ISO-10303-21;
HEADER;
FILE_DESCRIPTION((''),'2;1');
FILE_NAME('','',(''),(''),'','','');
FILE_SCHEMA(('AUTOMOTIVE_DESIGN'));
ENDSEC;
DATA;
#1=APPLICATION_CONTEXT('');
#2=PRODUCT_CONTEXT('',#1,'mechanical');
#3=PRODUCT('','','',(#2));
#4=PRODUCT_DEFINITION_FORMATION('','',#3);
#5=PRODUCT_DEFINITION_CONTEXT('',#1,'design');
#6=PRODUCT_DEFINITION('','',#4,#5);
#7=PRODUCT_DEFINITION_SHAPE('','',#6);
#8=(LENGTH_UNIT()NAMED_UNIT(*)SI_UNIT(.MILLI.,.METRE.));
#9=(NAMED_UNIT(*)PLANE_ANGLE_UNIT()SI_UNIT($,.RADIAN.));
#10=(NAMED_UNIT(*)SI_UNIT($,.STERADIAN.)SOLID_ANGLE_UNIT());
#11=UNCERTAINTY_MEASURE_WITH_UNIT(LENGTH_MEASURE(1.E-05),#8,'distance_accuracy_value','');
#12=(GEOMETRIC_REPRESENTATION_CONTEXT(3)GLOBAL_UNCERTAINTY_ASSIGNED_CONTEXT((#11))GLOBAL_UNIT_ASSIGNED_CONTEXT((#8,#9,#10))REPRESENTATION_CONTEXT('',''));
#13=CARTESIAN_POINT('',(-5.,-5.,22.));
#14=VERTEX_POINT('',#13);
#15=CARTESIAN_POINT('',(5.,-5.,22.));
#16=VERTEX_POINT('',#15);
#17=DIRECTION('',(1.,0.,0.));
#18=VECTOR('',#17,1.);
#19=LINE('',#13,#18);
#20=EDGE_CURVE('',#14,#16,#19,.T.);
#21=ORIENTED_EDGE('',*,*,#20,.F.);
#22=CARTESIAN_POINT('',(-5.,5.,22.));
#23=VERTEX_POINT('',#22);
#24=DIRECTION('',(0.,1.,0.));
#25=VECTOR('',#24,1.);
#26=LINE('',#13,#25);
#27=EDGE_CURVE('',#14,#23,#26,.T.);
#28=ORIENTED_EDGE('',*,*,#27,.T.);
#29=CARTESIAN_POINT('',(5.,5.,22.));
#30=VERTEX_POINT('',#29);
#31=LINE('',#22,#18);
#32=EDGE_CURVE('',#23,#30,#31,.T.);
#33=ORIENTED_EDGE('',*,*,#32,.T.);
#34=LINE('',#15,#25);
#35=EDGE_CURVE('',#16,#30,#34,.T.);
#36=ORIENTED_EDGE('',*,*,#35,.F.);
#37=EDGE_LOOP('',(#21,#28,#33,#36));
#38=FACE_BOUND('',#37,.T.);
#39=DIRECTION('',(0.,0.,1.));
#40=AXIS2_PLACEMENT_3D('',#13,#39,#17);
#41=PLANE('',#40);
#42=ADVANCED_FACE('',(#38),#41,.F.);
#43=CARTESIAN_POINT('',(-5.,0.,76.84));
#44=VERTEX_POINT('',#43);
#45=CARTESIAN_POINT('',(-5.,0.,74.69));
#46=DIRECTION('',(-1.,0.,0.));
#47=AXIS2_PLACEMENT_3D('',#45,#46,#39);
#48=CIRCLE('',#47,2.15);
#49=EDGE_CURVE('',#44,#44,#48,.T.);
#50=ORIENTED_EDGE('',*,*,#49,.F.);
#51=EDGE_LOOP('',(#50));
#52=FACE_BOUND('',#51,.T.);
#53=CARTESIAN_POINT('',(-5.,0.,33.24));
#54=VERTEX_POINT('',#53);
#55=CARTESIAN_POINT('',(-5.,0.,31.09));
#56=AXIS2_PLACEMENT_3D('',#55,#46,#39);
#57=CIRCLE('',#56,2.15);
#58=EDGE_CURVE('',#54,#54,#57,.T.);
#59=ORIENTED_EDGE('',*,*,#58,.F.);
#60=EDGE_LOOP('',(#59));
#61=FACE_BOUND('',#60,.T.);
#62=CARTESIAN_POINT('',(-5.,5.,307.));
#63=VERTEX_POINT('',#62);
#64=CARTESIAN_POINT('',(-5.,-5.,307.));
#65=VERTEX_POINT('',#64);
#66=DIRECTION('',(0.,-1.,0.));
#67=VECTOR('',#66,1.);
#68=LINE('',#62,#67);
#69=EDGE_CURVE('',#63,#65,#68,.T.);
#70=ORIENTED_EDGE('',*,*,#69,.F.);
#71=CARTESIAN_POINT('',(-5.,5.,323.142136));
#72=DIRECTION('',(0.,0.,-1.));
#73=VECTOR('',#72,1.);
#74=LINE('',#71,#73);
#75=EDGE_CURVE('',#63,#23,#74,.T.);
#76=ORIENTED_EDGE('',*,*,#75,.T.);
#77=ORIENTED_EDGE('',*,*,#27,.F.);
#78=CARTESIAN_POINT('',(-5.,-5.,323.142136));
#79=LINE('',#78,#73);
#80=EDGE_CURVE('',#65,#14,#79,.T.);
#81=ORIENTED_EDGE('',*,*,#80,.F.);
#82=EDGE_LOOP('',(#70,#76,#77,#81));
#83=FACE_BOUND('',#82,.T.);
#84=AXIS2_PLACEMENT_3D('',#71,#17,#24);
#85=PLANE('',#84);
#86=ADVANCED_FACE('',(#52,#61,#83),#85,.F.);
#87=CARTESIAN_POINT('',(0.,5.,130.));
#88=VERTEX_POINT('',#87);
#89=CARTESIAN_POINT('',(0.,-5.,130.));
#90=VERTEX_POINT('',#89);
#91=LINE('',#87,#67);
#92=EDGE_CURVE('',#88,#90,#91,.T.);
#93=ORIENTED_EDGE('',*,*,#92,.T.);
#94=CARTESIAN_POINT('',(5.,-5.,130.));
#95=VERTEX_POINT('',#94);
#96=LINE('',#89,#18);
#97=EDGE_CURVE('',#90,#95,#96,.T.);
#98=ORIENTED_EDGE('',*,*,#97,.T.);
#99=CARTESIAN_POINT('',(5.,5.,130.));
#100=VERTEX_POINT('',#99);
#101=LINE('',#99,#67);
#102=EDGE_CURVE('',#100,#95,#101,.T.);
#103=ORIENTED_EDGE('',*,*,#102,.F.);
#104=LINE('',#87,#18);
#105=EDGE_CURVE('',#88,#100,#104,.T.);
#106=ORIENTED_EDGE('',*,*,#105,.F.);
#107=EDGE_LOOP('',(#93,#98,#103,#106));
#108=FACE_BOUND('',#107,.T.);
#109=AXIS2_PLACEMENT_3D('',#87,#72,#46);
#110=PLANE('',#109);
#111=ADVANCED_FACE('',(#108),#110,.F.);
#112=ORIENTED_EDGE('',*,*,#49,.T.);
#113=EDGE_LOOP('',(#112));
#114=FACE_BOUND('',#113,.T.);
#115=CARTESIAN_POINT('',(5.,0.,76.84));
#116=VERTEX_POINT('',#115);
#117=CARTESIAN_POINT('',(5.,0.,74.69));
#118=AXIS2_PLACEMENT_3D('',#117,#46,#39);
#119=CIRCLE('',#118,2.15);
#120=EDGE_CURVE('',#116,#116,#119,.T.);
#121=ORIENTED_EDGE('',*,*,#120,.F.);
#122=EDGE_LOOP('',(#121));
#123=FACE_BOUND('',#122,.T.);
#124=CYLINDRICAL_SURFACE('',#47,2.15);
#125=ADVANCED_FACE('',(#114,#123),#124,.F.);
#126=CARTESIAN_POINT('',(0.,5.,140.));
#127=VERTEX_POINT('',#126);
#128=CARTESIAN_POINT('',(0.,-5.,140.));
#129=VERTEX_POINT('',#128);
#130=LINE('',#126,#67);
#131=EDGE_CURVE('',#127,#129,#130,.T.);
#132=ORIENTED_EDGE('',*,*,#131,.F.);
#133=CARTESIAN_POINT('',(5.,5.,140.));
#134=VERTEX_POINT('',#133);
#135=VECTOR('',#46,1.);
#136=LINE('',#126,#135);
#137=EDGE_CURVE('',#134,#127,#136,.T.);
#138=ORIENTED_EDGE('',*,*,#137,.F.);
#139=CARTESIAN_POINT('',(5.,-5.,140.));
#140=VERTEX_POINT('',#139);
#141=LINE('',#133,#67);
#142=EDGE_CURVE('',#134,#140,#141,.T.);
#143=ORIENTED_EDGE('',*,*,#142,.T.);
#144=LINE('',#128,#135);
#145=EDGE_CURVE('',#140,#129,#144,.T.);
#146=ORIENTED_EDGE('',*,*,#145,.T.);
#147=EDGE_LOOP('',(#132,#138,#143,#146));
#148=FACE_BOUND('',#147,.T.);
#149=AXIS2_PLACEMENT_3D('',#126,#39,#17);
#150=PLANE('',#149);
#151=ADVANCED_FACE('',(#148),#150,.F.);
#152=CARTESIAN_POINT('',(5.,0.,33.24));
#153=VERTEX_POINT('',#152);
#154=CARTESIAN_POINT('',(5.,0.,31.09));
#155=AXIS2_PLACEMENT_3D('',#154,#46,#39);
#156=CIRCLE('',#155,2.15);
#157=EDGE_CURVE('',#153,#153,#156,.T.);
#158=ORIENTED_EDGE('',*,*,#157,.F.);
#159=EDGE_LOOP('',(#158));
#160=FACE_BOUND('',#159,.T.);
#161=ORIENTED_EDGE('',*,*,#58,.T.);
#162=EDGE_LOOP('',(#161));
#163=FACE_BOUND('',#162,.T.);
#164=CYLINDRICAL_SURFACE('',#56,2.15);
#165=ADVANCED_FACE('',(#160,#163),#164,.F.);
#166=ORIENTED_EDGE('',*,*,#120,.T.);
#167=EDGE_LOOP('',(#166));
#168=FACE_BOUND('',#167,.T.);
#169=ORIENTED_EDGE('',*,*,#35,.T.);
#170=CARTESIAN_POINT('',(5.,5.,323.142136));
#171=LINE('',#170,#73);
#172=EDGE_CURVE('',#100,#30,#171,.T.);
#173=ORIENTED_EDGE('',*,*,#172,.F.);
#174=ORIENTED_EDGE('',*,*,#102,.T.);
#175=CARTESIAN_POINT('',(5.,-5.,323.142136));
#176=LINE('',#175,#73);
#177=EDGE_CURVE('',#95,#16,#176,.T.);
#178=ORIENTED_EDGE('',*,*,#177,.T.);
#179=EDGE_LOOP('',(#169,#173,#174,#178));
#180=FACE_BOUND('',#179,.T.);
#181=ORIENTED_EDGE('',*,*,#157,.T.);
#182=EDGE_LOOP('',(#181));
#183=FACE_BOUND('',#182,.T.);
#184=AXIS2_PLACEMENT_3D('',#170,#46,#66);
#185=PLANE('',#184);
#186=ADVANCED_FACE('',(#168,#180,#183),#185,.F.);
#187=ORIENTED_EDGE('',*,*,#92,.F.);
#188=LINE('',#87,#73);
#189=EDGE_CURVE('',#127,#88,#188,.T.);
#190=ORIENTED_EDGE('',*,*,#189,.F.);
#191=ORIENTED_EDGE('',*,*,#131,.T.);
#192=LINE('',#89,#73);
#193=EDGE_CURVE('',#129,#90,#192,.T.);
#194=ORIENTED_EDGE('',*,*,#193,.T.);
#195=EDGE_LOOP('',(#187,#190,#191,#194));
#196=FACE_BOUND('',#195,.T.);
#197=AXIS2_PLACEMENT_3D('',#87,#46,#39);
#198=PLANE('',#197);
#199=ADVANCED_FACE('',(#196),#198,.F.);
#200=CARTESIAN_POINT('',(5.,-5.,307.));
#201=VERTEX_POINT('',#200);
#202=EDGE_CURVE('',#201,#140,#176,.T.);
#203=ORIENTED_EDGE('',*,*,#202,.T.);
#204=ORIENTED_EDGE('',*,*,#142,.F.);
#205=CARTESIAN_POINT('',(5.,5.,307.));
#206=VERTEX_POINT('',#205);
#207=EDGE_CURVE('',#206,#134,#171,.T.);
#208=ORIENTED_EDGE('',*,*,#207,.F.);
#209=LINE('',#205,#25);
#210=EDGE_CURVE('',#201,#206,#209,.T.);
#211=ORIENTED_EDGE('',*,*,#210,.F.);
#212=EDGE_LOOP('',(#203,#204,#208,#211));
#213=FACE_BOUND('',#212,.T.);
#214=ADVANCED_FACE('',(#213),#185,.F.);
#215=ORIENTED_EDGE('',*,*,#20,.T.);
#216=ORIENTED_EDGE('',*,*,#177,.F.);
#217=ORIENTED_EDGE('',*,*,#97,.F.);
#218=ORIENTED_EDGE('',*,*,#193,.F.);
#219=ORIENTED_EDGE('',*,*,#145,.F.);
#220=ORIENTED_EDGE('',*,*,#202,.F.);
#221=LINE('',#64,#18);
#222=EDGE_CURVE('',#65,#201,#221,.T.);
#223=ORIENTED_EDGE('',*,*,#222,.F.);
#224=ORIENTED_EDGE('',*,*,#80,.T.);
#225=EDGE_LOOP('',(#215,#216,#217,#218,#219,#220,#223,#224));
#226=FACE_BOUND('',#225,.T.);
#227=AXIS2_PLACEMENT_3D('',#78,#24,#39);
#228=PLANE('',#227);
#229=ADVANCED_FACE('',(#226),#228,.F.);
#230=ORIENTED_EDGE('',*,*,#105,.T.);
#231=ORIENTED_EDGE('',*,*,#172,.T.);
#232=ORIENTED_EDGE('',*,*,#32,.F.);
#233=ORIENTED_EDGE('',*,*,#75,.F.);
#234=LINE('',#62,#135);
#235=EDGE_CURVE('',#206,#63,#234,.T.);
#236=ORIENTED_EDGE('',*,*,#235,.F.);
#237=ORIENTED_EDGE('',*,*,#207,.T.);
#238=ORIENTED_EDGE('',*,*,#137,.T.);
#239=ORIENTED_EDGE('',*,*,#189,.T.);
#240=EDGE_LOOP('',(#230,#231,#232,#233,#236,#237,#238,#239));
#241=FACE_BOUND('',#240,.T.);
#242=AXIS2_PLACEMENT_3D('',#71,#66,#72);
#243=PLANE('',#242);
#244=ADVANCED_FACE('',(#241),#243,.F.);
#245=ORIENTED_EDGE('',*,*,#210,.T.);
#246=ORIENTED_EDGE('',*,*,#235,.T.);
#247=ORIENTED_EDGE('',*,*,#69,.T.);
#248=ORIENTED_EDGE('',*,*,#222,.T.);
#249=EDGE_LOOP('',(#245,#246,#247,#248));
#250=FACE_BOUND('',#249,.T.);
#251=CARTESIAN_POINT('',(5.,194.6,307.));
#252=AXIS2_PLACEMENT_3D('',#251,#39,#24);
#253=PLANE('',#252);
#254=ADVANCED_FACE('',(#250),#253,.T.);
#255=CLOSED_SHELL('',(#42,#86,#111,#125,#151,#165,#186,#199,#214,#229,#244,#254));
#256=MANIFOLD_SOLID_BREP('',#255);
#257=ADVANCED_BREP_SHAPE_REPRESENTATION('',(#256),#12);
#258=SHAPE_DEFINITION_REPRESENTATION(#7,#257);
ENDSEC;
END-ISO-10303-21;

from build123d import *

# Parameters (mm, degrees)
ESQUISSE1_W                  = 10
ESQUISSE1_H                  = 10
BOSS_EXTRU_1_DEPTH           = 307
ENL_V_MAT_EXTRU_1_DEPTH      = 308.081422427
ENL_V_MAT_EXTRU_1_DEPTH_BACK = 308.081422427
ESQUISSE2_W                  = 10
ESQUISSE2_H                  = 22
D_GAGEMENT_M41_OUTLINE_W     = 10
D_GAGEMENT_M41_OUTLINE_H     = 10
D_GAGEMENT_M41_OUTLINE_R     = 2.15
D_GAGEMENT_M41_DEPTH         = 5
D_GAGEMENT_START             = -5
D_GAGEMENT_M41_2_OUTLINE_R   = 2.15
D_GAGEMENT_M41_2_DEPTH       = 5


# Read off the part's stored shape, not the designer's step: Dégagement M41
with BuildPart() as part:
    # Esquisse1 → Boss.-Extru.1 (new body)
    with BuildSketch(Plane.XY):
        Rectangle(ESQUISSE1_W, ESQUISSE1_H)
    extrude(amount=BOSS_EXTRU_1_DEPTH)

    # Esquisse2 → Enlèv. mat.-Extru.1 (cut, two sides: drawn at the far end of the back side and taken through both)
    with BuildSketch(Plane(origin=(0, 0, 0), x_dir=(1, 0, 0), z_dir=(0, 1, 0)).offset(-ENL_V_MAT_EXTRU_1_DEPTH_BACK)):
        with Locations((0, -11)):
            Rectangle(ESQUISSE2_W, ESQUISSE2_H)
    extrude(amount=ENL_V_MAT_EXTRU_1_DEPTH + ENL_V_MAT_EXTRU_1_DEPTH_BACK, mode=Mode.SUBTRACT)

    # Dégagement M41 outline → Dégagement M41 (cut)
    with BuildSketch(Plane.YZ):
        with Locations((0, 135)):
            Rectangle(D_GAGEMENT_M41_OUTLINE_W, D_GAGEMENT_M41_OUTLINE_H)
        with Locations((0, 31.09)):
            Circle(D_GAGEMENT_M41_OUTLINE_R)
        with Locations((0, 74.69)):
            Circle(D_GAGEMENT_M41_OUTLINE_R)
    extrude(amount=D_GAGEMENT_M41_DEPTH, mode=Mode.SUBTRACT)

    # D_gagement M41 2 outline → D_gagement M41 2 (cut)
    with BuildSketch(Plane.YZ.offset(D_GAGEMENT_START)):
        with Locations((0, 31.09)):
            Circle(D_GAGEMENT_M41_2_OUTLINE_R)
        with Locations((0, 74.69)):
            Circle(D_GAGEMENT_M41_2_OUTLINE_R)
    extrude(amount=D_GAGEMENT_M41_2_DEPTH, mode=Mode.SUBTRACT)


solid = part.part
